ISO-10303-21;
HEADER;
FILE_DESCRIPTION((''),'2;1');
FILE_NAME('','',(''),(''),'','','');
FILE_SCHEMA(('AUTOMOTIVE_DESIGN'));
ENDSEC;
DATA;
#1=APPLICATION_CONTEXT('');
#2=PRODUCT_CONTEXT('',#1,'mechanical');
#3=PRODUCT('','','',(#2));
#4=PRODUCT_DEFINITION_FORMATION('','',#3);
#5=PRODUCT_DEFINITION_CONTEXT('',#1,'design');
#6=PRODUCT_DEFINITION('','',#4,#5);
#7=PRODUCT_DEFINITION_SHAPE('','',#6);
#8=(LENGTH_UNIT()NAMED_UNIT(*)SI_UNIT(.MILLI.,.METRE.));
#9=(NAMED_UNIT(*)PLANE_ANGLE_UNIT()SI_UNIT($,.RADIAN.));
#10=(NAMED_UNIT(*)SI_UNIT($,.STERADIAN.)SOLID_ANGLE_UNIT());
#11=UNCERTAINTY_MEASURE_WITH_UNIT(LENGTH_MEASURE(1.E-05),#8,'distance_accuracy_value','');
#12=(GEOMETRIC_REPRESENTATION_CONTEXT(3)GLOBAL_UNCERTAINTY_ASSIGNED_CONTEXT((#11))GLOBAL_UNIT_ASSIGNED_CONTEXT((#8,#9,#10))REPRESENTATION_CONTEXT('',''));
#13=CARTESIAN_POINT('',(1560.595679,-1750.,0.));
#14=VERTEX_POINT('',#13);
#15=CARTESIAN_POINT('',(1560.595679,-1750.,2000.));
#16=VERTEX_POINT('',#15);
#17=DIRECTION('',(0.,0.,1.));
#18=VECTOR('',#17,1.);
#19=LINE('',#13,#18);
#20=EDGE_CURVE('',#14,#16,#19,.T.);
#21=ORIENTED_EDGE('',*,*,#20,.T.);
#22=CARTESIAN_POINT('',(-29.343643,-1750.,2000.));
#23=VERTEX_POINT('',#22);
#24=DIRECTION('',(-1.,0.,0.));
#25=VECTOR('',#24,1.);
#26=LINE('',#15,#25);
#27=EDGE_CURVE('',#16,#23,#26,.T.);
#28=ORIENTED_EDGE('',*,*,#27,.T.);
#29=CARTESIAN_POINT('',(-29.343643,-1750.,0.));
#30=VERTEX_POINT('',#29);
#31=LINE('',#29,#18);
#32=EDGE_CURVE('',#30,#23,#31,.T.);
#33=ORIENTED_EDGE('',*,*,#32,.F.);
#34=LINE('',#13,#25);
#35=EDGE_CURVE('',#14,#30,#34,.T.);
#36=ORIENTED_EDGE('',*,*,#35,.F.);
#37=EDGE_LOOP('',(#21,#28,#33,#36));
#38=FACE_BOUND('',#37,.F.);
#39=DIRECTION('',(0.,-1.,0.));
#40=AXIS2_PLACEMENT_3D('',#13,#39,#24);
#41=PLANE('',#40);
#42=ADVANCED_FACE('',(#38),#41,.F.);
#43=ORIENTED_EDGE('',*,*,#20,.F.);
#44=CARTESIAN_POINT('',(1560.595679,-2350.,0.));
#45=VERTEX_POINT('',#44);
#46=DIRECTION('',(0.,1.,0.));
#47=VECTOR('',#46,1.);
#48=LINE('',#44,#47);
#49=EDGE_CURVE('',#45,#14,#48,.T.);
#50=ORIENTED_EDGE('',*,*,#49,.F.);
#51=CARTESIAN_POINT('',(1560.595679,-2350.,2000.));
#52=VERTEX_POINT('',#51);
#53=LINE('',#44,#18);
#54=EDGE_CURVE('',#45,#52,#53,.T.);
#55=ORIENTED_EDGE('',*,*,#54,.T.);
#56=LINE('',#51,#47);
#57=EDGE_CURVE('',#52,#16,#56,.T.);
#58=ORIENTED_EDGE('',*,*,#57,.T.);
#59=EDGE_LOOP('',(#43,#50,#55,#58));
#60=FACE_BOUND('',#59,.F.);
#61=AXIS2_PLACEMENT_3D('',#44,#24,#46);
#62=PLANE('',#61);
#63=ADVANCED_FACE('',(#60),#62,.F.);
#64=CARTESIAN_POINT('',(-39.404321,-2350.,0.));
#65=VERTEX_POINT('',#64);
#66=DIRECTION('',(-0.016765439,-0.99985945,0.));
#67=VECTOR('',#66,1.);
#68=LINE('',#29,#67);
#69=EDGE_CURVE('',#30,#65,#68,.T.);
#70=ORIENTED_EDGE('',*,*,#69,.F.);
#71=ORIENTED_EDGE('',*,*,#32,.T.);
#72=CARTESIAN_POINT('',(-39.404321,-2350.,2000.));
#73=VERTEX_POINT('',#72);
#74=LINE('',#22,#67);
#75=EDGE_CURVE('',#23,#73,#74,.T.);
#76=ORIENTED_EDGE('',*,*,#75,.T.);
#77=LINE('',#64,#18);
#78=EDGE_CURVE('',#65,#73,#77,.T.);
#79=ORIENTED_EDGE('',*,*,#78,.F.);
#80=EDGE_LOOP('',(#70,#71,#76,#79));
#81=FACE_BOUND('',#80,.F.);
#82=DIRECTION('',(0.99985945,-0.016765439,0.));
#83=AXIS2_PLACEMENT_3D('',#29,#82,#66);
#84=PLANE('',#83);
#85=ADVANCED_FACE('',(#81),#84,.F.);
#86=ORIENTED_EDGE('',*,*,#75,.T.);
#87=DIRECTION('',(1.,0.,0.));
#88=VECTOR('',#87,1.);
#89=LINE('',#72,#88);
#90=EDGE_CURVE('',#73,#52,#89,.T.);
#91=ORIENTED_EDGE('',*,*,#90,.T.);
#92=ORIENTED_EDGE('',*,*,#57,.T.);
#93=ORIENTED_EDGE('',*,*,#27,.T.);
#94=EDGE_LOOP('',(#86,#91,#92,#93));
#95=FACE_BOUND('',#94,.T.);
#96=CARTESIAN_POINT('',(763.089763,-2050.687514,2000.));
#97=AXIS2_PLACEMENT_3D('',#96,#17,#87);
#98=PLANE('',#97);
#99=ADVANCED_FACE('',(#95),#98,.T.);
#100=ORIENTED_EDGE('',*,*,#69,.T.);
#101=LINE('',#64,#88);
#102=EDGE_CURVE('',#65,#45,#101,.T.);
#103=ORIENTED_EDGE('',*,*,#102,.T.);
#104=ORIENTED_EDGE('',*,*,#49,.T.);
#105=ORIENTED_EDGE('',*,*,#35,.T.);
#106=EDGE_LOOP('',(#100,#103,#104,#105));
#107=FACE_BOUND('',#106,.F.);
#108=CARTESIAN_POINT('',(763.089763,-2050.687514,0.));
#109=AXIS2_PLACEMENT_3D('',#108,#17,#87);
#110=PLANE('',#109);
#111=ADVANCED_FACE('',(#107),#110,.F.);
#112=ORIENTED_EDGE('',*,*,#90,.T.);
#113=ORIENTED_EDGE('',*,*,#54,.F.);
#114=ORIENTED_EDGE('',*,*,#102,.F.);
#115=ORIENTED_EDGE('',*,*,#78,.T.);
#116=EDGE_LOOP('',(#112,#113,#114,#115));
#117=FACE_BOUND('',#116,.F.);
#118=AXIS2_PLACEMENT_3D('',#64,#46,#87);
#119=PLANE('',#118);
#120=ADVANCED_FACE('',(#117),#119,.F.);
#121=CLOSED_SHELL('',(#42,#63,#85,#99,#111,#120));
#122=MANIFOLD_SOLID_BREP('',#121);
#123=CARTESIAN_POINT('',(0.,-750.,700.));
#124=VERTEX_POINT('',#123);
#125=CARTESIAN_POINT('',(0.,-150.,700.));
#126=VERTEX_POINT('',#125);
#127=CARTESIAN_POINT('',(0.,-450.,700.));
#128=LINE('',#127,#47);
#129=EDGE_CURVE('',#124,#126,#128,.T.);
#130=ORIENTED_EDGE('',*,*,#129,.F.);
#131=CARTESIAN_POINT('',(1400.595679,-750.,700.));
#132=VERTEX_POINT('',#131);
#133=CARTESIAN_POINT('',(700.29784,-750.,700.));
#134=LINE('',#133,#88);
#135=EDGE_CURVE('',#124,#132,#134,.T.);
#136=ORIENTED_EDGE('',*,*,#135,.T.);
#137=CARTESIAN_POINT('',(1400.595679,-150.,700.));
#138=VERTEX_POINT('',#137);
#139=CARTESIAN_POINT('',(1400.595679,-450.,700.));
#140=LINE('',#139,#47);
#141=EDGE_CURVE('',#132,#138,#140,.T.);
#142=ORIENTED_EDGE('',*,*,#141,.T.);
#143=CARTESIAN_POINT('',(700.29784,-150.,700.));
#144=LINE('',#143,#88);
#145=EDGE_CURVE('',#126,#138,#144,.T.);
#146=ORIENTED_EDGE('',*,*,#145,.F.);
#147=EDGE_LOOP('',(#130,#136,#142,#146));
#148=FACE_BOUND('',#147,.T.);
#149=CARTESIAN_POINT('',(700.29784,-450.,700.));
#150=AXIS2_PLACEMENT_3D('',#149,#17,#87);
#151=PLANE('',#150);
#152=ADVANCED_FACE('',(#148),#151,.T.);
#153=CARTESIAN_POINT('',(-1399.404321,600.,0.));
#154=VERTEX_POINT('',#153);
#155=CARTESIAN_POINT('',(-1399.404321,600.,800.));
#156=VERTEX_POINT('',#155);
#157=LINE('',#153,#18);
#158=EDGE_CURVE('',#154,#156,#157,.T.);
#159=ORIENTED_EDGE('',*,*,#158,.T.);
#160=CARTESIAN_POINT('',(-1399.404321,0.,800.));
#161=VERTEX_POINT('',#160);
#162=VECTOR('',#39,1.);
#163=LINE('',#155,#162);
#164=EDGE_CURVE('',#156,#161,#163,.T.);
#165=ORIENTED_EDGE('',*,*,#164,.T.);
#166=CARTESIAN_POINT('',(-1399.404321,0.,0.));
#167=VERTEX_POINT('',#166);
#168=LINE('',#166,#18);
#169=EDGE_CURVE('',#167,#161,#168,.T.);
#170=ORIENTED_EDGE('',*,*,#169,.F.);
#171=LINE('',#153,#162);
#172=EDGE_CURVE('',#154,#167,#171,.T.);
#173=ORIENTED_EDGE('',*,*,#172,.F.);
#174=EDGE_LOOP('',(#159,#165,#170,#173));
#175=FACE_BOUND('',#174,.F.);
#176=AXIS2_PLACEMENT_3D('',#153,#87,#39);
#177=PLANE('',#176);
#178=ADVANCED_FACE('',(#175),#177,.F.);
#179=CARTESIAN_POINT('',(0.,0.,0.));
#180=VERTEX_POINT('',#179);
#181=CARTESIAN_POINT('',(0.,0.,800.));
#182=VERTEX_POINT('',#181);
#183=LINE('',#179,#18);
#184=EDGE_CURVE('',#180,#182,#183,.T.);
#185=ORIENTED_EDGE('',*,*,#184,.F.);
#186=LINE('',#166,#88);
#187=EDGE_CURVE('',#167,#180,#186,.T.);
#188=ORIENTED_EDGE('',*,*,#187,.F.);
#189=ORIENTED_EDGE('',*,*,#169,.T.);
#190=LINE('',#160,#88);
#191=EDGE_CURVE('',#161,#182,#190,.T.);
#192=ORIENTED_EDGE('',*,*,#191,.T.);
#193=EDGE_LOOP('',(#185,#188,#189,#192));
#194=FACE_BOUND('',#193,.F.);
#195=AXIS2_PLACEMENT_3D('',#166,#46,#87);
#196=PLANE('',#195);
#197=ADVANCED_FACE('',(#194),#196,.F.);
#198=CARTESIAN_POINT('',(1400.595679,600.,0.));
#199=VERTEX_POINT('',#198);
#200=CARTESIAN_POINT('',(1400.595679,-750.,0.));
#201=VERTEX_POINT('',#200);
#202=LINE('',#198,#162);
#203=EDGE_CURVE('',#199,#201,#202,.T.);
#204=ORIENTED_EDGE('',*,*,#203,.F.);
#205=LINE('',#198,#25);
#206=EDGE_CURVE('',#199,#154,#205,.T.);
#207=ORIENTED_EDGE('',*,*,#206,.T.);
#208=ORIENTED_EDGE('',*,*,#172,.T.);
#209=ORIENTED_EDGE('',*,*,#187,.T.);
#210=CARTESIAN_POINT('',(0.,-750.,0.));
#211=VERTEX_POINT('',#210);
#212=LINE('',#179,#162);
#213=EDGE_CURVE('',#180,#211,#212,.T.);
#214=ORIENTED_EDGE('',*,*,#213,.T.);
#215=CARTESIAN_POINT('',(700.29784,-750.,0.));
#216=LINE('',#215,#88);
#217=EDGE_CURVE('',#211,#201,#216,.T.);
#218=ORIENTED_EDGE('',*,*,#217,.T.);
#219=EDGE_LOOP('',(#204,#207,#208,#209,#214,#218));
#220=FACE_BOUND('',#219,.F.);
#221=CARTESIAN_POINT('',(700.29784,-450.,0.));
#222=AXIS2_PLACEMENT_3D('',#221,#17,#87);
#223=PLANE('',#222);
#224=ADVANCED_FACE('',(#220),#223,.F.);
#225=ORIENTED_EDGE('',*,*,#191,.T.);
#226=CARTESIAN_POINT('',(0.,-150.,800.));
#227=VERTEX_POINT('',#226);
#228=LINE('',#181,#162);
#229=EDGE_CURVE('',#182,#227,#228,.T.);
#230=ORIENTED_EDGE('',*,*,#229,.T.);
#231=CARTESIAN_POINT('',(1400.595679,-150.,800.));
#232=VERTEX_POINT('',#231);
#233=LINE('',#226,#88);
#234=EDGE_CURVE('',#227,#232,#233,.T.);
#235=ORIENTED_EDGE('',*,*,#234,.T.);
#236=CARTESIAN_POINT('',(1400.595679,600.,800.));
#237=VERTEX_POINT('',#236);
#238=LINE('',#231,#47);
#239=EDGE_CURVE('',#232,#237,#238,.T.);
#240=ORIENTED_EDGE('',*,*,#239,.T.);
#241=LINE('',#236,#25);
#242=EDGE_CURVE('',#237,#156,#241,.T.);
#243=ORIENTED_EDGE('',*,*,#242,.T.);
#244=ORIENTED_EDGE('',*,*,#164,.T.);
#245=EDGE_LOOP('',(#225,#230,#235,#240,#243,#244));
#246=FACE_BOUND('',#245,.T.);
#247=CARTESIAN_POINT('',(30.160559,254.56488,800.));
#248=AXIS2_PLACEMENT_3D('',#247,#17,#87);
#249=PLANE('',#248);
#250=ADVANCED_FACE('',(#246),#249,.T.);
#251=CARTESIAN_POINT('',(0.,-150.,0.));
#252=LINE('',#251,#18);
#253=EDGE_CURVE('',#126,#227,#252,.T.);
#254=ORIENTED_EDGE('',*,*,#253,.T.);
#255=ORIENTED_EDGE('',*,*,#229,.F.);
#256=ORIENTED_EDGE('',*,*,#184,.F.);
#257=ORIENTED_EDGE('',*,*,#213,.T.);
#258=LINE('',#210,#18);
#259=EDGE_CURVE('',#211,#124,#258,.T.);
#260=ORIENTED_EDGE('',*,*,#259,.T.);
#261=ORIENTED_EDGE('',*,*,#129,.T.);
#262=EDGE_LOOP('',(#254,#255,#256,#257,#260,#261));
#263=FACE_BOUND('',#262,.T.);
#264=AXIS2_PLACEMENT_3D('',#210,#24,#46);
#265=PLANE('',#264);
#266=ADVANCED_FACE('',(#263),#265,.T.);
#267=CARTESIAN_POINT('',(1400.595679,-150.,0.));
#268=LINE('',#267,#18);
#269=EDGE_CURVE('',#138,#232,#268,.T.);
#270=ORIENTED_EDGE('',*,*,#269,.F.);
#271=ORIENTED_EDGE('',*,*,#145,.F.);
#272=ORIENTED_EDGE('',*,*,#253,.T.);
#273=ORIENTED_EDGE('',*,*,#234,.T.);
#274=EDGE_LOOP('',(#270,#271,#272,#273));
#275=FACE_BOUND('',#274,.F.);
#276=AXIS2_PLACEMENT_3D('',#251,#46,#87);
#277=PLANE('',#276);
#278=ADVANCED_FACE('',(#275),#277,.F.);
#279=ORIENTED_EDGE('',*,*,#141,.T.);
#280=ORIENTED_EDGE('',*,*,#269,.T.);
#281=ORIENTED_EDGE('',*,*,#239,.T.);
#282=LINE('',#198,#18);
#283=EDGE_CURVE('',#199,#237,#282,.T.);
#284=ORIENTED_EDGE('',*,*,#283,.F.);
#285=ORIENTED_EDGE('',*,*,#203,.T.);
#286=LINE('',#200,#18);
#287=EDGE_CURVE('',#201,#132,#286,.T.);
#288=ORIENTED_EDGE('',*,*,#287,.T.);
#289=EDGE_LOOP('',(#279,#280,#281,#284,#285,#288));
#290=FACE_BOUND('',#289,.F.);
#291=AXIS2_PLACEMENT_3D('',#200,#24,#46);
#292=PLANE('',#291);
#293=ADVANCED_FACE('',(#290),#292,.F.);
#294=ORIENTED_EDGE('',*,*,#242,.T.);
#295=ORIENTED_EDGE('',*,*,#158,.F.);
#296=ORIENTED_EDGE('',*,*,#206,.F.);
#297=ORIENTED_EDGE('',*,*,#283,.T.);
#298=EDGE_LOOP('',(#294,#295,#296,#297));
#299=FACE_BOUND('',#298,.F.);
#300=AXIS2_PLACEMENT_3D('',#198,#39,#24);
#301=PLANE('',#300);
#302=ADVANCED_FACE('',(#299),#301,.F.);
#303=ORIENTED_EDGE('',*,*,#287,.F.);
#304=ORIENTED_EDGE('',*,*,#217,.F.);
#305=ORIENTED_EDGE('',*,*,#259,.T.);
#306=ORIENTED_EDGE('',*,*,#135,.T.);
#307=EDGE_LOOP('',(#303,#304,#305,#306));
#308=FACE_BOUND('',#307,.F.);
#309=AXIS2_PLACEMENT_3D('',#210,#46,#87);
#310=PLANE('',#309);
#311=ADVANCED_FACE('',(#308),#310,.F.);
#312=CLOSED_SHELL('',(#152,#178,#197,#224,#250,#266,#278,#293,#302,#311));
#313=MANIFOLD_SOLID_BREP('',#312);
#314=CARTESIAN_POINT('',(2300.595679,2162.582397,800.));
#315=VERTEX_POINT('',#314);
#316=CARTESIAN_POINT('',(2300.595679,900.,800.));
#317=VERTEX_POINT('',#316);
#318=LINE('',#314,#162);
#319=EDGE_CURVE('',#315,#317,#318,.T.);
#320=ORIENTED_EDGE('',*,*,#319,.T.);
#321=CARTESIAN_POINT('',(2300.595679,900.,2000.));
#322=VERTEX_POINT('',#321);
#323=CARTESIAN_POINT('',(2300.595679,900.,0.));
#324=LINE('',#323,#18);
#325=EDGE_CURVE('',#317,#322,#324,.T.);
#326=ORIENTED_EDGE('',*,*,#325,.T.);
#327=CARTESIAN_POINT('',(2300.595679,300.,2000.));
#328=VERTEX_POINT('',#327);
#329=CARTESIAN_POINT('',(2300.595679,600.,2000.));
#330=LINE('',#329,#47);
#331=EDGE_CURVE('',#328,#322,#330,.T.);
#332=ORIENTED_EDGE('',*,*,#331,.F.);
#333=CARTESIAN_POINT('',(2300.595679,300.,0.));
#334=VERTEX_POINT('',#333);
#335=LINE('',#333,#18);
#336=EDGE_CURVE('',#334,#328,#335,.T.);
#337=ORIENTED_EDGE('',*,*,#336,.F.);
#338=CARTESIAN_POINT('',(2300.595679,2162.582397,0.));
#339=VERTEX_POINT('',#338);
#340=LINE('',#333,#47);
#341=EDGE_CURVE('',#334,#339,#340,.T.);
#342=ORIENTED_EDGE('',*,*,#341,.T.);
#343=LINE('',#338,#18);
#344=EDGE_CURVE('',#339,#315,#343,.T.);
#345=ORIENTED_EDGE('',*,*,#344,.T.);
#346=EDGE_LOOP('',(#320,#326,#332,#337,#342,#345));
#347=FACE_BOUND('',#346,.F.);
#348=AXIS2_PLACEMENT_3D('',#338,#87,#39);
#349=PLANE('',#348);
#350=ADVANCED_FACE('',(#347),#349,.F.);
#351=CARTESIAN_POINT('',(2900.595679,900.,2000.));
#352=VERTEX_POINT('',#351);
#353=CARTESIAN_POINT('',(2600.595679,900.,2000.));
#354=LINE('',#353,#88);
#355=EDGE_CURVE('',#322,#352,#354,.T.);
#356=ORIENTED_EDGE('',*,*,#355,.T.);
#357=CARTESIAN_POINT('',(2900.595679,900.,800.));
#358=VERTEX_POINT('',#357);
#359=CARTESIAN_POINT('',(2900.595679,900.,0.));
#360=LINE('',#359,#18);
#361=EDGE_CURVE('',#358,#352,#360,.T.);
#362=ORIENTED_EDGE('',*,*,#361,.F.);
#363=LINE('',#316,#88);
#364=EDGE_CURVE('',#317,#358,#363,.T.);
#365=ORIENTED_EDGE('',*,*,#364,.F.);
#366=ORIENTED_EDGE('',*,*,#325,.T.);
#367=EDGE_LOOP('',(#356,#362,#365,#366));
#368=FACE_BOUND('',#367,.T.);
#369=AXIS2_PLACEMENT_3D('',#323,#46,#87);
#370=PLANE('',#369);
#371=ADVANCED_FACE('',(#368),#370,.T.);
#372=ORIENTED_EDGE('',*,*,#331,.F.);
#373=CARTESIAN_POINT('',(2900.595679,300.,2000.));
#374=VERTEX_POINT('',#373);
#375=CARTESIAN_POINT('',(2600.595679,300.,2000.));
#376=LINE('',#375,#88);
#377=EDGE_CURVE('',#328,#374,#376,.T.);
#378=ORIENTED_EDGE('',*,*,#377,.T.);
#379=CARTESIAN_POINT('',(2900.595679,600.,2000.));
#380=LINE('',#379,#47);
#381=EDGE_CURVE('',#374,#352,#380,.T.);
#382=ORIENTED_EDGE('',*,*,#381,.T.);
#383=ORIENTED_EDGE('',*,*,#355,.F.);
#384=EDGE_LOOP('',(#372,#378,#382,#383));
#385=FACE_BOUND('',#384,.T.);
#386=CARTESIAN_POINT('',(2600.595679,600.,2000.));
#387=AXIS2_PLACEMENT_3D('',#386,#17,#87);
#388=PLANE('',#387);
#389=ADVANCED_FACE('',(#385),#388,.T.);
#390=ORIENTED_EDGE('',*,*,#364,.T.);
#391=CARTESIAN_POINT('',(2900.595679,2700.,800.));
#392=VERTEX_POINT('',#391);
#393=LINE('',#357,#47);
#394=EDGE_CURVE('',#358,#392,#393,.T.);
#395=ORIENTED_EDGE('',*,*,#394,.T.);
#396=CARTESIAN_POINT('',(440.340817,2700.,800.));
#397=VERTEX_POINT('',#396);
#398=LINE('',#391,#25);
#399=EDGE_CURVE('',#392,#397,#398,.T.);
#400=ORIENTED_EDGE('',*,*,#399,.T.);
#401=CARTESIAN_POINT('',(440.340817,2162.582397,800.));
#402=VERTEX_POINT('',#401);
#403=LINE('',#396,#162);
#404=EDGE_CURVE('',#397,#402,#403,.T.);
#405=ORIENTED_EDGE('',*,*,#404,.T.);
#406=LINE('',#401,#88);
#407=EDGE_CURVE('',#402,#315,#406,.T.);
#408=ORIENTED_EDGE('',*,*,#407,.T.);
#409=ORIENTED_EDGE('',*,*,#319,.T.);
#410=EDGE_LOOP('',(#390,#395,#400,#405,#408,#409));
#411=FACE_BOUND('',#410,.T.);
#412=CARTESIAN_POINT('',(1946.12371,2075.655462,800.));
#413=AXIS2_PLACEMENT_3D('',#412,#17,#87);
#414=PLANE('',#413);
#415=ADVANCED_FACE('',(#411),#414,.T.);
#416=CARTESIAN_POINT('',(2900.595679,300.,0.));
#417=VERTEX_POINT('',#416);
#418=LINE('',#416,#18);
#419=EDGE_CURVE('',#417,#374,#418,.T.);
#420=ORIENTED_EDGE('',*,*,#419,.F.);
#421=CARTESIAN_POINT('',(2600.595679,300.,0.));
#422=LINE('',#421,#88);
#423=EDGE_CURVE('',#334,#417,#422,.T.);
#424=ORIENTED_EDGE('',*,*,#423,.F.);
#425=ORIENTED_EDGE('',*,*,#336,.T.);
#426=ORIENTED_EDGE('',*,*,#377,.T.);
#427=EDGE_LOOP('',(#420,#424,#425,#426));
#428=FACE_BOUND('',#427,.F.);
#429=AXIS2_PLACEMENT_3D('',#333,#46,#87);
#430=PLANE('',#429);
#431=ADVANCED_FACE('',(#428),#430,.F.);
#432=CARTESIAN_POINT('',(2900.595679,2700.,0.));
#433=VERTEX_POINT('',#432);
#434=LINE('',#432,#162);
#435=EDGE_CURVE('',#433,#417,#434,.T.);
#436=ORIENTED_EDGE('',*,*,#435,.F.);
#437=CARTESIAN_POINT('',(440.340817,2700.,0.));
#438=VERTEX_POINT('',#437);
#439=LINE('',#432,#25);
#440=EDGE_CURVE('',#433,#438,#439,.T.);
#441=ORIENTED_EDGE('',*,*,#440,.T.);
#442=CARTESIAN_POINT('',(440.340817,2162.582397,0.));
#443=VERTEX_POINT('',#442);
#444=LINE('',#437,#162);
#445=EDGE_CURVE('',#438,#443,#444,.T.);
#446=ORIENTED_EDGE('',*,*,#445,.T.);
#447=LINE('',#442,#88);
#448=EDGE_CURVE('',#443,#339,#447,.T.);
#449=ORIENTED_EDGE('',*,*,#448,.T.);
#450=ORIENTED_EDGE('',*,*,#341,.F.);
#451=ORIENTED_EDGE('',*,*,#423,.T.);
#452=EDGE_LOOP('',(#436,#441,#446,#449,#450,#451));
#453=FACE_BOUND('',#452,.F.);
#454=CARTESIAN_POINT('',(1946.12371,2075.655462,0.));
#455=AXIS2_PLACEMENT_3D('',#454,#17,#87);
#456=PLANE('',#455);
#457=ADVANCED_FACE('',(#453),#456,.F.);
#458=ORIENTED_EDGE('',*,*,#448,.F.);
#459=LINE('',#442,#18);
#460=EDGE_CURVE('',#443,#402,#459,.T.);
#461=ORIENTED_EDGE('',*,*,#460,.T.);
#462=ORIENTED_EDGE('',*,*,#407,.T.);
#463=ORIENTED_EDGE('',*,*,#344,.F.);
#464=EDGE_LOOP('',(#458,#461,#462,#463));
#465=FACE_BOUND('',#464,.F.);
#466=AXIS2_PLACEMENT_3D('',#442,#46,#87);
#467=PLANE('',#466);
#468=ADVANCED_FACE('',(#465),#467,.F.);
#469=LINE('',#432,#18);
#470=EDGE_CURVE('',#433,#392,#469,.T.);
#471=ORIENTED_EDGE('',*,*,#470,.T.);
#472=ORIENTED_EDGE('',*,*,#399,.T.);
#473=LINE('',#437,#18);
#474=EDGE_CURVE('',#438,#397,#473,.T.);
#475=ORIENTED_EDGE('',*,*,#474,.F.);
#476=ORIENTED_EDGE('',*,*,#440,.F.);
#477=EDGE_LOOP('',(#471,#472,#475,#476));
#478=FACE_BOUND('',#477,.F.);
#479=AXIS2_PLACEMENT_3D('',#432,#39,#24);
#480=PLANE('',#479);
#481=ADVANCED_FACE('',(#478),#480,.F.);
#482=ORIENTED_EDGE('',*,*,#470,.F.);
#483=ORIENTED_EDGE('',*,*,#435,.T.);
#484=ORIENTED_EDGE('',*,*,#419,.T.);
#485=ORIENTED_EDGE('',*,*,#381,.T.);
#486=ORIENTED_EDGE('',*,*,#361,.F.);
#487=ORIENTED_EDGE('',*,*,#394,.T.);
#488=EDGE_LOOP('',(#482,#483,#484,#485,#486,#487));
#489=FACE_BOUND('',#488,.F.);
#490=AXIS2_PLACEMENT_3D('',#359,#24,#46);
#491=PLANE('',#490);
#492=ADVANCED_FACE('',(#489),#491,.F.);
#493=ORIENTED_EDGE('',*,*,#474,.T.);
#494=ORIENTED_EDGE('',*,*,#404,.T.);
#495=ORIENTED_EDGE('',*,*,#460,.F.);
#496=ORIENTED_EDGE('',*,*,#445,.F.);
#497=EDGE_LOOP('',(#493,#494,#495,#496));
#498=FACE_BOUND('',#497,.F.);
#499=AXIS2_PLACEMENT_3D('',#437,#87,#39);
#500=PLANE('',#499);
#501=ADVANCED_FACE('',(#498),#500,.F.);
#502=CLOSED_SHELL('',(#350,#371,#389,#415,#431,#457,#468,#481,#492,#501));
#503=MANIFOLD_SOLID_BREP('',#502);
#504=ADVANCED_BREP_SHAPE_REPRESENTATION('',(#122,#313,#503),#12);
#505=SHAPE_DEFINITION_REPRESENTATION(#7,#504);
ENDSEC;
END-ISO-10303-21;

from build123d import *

# Parameters (mm, degrees)
F3_DEPTH = 800
F4_DEPTH = 2000
F0_W     = 600
F0_H     = 600
F5_DEPTH = 2000
F6_DEPTH = 800
F0_W_2   = 1400.595679329
F7_DEPTH = 700


# Not quite as in the source:
# - the program builds the solid bodies; features that only make, move or delete a surface that nothing else refers to are left out


with BuildPart() as f3:
    # F0 (on Top) → F3 (new body)
    with BuildSketch(Plane.XY):
        Polygon((-1399.404320671, 600), (-1399.404320671, 0), (0, 0), (0, -150), (1400.595679329, -150), (1400.595679329, 600), align=None)
    extrude(amount=F3_DEPTH)

    # F0 (on Top) → F7 (join)
    with BuildSketch(Plane.XY):
        with Locations((700.2978396645, -450)):
            Rectangle(F0_W_2, F0_H)
    extrude(amount=F7_DEPTH)


with BuildPart() as f4:
    # F0 (on Top) → F4 (new body)
    with BuildSketch(Plane.XY):
        Polygon((1560.595679329, -1750), (-29.3436430529, -1750), (-39.404320671, -2350), (1560.595679329, -2350), align=None)
    extrude(amount=F4_DEPTH)


with BuildPart() as f5:
    # F0 (on Top) → F5 (new body, through all)
    with BuildSketch(Plane.XY):
        with Locations((2600.595679329, 600)):
            Rectangle(F0_W, F0_H)
    extrude(amount=F5_DEPTH)

    # F0 (on Top) → F6 (join, through all)
    with BuildSketch(Plane.XY):
        Polygon((490.595679329, 2700), (440.3408169746, 2700), (440.3408169746, 2162.5823974609), (2300.595679329, 2162.5823974609), (2300.595679329, 900), (2900.595679329, 900), (2900.595679329, 2700), (2150.595679329, 2700), align=None)
    extrude(amount=F6_DEPTH)


solid = Compound([f3.part, f4.part, f5.part])
